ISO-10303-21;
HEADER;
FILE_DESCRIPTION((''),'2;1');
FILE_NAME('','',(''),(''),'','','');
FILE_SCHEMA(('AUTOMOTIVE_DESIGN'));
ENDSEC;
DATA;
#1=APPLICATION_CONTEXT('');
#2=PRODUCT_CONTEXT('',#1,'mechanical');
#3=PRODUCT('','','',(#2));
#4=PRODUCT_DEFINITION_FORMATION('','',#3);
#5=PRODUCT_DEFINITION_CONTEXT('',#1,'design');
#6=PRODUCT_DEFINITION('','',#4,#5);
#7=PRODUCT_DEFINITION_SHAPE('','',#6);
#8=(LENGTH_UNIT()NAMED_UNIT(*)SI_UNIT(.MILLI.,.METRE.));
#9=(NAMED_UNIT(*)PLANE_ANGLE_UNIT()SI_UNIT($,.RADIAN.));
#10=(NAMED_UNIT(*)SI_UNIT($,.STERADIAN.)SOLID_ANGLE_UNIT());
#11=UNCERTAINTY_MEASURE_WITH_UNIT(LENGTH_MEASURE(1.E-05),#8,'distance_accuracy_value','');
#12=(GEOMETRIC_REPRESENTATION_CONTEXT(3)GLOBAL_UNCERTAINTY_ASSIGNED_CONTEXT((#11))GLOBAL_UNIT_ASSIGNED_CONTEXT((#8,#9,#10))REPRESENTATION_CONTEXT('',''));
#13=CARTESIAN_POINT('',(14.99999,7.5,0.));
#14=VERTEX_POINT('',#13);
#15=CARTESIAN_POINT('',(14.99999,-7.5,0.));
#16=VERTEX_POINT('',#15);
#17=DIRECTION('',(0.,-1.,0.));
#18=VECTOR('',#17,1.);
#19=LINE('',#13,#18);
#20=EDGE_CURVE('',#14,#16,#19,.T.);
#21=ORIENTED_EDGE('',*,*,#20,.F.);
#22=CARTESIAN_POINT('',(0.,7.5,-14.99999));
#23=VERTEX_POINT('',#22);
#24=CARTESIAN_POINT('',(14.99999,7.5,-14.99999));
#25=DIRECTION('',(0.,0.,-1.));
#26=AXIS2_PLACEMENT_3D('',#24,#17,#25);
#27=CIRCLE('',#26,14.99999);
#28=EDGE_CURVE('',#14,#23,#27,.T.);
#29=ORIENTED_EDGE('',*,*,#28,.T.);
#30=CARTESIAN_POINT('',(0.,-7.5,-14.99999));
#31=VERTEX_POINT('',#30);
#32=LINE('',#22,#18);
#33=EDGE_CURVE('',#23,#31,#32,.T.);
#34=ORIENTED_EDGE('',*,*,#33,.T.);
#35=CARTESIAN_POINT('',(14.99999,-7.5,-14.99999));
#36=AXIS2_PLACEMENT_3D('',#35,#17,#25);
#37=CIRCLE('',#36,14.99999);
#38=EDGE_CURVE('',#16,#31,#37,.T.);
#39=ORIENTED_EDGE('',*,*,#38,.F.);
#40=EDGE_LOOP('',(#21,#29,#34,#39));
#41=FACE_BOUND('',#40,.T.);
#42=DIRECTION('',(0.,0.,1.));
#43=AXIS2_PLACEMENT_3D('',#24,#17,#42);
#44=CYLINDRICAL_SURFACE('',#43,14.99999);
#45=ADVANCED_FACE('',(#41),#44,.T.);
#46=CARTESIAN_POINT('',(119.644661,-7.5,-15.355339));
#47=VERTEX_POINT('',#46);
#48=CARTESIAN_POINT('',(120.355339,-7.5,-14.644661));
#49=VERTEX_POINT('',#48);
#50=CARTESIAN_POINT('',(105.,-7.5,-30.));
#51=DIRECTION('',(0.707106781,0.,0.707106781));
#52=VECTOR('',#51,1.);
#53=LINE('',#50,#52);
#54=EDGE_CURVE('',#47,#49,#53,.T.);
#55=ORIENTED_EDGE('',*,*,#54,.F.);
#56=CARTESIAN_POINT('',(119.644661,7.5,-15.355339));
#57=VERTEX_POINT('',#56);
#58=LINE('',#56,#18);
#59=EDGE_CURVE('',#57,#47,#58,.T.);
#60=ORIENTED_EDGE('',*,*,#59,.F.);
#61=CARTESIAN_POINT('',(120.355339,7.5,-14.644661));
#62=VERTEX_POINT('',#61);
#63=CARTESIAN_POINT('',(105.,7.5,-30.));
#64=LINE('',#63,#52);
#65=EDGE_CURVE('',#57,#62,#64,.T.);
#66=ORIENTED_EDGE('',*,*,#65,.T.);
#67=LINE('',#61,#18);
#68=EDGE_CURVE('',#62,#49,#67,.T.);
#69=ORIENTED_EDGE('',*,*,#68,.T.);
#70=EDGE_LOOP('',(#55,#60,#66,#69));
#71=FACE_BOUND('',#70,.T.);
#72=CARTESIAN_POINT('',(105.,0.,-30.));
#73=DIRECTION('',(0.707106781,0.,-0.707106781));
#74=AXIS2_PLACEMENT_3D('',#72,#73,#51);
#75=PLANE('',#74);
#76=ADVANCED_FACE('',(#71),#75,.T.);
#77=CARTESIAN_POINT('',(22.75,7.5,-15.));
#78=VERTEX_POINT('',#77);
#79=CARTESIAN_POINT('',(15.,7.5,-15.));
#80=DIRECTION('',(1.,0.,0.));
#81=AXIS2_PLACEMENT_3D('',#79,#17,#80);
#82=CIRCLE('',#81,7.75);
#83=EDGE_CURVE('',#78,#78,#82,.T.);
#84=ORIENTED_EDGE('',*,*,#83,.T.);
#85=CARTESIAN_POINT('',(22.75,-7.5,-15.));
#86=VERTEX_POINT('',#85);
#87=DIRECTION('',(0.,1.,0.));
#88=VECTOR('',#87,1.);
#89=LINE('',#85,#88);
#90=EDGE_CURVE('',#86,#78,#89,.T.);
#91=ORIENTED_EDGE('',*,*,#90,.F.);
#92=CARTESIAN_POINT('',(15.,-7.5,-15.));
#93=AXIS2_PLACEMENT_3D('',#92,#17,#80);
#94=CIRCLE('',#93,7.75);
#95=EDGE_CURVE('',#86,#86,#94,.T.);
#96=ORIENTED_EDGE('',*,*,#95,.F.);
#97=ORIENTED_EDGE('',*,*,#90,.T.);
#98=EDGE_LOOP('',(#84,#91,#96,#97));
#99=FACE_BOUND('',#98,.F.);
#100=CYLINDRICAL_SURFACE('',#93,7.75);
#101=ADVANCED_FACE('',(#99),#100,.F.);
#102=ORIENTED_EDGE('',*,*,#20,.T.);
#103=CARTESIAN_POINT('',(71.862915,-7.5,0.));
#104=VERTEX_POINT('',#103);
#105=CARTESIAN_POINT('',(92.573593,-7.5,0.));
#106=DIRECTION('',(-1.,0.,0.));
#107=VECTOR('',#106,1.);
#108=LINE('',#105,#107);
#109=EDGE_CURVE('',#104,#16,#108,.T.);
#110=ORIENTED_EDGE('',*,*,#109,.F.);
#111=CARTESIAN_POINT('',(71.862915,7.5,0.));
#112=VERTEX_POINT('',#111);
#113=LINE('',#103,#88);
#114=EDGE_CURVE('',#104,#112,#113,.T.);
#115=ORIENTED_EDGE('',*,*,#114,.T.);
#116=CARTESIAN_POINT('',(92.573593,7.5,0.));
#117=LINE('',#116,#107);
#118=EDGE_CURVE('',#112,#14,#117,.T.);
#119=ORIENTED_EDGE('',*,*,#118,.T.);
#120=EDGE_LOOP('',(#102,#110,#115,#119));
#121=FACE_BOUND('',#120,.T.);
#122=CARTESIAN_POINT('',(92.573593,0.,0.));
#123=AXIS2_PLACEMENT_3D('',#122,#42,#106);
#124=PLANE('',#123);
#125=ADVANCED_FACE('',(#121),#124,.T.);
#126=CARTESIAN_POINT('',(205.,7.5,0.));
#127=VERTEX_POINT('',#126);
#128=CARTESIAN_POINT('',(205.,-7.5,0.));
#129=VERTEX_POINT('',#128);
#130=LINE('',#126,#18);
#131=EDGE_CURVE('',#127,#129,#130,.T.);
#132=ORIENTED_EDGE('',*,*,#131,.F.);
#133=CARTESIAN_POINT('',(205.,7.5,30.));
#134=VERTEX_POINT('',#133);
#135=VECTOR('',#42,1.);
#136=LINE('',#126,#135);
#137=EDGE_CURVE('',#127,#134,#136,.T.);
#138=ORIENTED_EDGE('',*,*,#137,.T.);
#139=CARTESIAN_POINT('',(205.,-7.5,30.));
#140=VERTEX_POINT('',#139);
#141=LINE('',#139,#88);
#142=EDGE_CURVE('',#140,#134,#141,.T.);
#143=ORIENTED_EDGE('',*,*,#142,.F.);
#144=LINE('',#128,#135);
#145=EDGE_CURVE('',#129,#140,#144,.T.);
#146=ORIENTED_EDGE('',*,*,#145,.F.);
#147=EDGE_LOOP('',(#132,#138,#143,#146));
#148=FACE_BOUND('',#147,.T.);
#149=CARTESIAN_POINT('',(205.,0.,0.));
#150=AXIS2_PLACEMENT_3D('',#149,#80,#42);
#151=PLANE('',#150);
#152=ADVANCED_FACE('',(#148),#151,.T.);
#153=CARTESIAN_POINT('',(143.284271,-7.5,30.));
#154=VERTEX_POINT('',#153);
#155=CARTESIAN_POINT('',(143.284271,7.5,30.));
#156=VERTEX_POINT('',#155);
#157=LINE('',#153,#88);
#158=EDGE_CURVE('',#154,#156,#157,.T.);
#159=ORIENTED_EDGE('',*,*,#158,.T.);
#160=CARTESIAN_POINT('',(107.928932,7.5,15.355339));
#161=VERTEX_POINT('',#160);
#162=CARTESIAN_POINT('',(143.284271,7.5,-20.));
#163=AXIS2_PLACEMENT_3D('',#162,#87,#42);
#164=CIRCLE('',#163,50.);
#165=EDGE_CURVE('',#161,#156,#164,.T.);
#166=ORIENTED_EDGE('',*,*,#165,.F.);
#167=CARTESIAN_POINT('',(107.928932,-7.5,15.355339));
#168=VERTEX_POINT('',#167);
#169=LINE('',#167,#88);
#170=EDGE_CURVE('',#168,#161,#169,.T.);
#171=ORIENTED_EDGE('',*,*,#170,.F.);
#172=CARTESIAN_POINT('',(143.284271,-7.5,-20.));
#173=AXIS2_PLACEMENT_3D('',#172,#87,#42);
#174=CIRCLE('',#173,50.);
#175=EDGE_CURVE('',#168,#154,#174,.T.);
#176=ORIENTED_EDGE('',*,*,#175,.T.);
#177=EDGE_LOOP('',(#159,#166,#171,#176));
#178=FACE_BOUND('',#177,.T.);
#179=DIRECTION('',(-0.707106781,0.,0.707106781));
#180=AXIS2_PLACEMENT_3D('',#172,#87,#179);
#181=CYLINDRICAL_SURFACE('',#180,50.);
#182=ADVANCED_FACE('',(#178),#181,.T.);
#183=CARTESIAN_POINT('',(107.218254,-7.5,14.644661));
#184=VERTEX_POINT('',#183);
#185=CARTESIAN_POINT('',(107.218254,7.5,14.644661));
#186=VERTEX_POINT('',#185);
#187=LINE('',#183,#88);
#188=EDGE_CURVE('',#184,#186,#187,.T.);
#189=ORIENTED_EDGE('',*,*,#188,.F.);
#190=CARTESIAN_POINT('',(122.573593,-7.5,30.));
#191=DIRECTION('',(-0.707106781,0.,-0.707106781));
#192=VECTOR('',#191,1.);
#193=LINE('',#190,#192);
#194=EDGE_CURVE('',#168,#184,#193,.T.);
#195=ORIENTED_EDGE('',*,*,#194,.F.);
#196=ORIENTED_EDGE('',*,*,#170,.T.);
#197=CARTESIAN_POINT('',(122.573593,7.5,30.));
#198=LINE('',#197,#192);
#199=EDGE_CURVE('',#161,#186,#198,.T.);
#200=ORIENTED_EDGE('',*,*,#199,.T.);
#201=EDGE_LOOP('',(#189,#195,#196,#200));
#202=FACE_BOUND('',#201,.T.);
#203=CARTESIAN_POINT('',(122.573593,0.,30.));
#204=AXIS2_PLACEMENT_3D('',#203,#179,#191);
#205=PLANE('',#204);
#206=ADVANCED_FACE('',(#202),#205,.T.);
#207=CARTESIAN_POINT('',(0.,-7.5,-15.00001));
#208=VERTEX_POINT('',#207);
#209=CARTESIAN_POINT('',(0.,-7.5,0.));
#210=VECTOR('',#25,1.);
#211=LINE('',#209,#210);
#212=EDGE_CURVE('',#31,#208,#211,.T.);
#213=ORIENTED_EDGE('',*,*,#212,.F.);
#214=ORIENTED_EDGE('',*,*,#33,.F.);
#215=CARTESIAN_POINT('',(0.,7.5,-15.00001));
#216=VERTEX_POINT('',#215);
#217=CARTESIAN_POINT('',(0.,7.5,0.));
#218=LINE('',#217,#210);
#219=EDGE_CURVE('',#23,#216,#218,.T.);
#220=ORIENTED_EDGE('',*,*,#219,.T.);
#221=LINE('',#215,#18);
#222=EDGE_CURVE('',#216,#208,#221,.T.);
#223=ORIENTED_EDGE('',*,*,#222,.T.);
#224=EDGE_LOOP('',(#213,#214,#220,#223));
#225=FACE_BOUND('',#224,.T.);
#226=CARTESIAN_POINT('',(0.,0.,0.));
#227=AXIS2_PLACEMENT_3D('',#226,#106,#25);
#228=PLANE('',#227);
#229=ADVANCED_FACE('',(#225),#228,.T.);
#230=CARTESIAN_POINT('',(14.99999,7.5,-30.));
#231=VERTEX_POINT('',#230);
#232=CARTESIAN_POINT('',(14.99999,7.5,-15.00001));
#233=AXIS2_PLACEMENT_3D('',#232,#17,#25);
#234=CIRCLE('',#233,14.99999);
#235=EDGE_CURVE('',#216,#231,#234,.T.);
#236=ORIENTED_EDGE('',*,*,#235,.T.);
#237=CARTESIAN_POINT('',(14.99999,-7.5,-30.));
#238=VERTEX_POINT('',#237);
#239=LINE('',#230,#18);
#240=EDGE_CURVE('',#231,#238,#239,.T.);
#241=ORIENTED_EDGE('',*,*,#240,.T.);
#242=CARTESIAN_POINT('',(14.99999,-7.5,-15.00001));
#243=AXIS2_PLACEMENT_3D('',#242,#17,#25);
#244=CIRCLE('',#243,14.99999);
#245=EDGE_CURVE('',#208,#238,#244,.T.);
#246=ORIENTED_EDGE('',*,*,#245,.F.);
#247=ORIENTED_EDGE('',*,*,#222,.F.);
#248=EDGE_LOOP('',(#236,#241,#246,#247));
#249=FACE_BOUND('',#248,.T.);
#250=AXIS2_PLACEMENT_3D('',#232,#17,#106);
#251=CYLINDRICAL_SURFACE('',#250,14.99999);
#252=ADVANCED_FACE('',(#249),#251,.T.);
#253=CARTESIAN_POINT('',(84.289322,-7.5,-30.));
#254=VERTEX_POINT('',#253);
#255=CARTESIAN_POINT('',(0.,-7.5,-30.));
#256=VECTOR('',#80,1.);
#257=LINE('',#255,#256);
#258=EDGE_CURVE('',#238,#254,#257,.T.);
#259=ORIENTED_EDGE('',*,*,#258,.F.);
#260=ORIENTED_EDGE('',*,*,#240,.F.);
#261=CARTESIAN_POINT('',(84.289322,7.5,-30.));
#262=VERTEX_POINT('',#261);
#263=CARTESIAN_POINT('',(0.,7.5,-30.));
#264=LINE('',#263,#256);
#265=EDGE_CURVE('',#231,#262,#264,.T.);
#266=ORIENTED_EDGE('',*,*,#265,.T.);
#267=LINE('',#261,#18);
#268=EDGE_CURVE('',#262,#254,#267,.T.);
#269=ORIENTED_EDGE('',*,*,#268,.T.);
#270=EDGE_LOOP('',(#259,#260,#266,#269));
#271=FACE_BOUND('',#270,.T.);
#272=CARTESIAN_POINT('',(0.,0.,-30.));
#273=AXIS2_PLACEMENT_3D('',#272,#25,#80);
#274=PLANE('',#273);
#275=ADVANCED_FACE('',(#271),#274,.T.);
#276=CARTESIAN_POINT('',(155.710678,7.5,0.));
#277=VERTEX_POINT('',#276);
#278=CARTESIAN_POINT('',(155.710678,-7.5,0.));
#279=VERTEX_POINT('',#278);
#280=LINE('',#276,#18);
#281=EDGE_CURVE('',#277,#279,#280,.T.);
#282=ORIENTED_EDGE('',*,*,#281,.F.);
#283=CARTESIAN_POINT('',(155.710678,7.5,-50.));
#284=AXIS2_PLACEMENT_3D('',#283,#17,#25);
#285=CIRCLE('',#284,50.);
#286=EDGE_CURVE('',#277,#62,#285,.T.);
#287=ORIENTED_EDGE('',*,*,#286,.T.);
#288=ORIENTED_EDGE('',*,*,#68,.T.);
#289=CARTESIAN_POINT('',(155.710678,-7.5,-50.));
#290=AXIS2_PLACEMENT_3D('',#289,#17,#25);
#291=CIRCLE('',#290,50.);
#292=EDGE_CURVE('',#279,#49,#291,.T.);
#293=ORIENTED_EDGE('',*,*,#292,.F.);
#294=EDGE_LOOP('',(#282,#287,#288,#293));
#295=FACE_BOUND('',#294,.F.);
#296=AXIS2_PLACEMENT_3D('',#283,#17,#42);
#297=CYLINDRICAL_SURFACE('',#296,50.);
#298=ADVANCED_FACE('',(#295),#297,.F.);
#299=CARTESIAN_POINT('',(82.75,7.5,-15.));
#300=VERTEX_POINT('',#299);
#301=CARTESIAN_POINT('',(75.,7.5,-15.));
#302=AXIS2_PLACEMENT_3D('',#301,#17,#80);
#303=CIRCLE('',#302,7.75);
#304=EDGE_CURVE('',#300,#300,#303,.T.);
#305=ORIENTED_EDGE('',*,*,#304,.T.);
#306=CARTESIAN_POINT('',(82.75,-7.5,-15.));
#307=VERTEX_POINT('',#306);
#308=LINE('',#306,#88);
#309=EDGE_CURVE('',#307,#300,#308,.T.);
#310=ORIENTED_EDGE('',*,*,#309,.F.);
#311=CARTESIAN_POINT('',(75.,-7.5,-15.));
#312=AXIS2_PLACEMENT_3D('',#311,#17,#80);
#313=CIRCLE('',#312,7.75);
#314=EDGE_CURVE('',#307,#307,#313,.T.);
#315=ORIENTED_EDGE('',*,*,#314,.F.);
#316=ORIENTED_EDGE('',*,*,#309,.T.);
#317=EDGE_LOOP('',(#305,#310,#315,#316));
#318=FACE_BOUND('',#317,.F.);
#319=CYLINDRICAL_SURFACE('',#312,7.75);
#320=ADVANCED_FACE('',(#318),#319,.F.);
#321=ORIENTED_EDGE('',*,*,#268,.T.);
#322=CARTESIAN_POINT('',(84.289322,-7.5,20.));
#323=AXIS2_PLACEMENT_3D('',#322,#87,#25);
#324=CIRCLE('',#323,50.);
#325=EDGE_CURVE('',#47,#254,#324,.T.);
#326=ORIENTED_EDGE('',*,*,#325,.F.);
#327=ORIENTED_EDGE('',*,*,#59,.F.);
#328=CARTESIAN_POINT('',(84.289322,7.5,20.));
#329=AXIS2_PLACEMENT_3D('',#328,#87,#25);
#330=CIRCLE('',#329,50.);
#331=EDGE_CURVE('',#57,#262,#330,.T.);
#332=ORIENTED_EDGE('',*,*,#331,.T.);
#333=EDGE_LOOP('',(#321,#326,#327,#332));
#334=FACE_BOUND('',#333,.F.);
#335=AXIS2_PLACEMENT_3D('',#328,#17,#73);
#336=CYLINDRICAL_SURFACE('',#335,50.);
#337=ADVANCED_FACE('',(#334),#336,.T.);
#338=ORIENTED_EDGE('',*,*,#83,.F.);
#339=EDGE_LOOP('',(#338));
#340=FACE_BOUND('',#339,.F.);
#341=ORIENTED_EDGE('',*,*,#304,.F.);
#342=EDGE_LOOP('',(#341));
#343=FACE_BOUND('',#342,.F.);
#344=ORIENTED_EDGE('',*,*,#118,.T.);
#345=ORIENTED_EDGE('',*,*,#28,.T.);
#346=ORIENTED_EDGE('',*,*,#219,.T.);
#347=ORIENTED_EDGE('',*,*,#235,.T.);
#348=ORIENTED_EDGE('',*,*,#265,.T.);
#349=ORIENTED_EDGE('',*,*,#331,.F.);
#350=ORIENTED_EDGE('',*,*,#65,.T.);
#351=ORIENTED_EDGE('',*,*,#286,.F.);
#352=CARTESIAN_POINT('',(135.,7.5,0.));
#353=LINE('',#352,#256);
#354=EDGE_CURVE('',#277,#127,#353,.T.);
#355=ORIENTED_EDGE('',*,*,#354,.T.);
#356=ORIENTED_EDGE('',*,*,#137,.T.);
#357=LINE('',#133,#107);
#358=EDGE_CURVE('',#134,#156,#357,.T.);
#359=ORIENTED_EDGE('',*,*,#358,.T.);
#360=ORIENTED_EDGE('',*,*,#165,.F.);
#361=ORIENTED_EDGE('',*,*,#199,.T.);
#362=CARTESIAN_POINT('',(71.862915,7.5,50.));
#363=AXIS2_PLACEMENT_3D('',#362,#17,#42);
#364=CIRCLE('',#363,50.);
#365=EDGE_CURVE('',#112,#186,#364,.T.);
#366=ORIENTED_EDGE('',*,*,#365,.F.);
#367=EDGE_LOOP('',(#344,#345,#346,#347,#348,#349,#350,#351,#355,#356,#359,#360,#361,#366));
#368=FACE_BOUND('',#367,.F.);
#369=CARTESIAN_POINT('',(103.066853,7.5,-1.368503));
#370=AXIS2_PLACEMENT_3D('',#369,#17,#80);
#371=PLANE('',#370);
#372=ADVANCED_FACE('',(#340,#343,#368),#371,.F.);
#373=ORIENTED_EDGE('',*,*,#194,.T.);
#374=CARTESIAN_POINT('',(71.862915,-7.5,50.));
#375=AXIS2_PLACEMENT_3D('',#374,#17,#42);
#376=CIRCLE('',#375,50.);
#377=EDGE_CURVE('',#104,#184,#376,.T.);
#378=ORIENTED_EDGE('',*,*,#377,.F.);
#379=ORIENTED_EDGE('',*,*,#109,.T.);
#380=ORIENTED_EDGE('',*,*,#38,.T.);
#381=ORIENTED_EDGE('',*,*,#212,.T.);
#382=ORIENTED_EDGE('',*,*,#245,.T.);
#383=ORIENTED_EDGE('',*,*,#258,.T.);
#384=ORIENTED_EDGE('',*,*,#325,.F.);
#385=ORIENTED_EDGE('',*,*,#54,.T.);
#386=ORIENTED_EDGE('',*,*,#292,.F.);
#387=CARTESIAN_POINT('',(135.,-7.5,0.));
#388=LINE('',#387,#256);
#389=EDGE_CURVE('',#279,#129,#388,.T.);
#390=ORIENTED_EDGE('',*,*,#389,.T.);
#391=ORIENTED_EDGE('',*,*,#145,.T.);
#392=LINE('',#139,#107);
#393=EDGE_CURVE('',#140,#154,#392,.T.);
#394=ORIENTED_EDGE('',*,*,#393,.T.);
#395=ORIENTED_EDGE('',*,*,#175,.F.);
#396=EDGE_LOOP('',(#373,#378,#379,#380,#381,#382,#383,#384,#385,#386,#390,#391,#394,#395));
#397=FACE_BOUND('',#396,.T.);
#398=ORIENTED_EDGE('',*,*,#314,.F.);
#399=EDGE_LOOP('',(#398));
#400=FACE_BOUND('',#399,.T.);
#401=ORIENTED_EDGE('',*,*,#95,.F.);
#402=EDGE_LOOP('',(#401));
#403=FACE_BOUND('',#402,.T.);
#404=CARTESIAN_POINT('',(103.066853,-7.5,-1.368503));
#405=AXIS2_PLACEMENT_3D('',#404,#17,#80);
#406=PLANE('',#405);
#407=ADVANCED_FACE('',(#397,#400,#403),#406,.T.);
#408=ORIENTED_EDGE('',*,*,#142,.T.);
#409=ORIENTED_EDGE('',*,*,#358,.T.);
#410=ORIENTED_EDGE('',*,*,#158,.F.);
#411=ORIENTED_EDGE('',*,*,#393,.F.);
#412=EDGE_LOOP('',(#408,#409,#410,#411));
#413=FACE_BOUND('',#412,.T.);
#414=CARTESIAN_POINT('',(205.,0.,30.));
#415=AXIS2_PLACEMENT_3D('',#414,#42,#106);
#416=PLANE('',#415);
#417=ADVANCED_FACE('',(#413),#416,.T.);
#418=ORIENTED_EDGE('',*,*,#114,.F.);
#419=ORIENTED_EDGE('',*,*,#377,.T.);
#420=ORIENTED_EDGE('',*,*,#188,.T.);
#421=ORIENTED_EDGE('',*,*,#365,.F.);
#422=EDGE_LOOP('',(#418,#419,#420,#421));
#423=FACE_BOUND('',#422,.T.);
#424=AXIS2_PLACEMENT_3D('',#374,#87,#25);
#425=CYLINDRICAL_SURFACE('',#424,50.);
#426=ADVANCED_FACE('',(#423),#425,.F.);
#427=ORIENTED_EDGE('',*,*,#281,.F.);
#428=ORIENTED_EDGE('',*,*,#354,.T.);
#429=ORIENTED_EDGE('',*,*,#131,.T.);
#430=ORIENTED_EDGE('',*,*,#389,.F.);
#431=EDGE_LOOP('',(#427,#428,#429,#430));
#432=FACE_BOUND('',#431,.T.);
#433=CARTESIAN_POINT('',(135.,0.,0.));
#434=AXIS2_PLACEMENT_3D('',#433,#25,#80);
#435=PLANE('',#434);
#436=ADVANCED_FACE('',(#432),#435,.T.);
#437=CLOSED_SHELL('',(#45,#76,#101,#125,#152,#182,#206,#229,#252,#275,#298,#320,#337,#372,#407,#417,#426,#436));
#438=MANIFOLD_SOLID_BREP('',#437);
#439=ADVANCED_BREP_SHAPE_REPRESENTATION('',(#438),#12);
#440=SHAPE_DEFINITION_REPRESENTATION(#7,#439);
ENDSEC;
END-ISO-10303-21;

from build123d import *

# Parameters (mm, degrees)
F1_DEPTH = 7.5
F2_R     = 50
F3_R     = 14.99999
F4_R     = 7.75
F5_DEPTH = 15


# Not quite as in the source:
# - a fillet or chamfer is up to 0.001 mm smaller than in the source, because OpenCascade refuses the exact size


with BuildPart() as f1:
    # F0 (on Front) → F1 (new body, symmetric)
    with BuildSketch(Plane.XZ):
        Polygon((92.5735931288, 0), (0, 0), (0, -30), (105, -30), (135, 0), (205, 0), (205, 30), (122.5735931288, 30), align=None)
    extrude(amount=F1_DEPTH, both=True)

    # F2
    f2_edges = [f1.edges().sort_by_distance(p)[0] for p in [
        (92.573593, 0, 0),
        (122.573593, 0, 30),
        (105, 0, -30),
        (135, 0, 0),
    ]]
    fillet(f2_edges, radius=F2_R)

    # F3 (radius 15 in the source; OpenCascade refuses exactly that, so slightly less here)
    f3_edges = [f1.edges().sort_by_distance(p)[0] for p in [
        (0, 0, 0),
        (0, 0, -30),
    ]]
    fillet(f3_edges, radius=F3_R)

    # F4 (on face) → F5 (cut, through all)
    with BuildSketch(Plane.XZ.offset(7.5)):
        with Locations((15, -15)):
            Circle(F4_R)
        with Locations((75, -15)):
            Circle(F4_R)
    extrude(amount=-F5_DEPTH, mode=Mode.SUBTRACT)


solid = f1.part
